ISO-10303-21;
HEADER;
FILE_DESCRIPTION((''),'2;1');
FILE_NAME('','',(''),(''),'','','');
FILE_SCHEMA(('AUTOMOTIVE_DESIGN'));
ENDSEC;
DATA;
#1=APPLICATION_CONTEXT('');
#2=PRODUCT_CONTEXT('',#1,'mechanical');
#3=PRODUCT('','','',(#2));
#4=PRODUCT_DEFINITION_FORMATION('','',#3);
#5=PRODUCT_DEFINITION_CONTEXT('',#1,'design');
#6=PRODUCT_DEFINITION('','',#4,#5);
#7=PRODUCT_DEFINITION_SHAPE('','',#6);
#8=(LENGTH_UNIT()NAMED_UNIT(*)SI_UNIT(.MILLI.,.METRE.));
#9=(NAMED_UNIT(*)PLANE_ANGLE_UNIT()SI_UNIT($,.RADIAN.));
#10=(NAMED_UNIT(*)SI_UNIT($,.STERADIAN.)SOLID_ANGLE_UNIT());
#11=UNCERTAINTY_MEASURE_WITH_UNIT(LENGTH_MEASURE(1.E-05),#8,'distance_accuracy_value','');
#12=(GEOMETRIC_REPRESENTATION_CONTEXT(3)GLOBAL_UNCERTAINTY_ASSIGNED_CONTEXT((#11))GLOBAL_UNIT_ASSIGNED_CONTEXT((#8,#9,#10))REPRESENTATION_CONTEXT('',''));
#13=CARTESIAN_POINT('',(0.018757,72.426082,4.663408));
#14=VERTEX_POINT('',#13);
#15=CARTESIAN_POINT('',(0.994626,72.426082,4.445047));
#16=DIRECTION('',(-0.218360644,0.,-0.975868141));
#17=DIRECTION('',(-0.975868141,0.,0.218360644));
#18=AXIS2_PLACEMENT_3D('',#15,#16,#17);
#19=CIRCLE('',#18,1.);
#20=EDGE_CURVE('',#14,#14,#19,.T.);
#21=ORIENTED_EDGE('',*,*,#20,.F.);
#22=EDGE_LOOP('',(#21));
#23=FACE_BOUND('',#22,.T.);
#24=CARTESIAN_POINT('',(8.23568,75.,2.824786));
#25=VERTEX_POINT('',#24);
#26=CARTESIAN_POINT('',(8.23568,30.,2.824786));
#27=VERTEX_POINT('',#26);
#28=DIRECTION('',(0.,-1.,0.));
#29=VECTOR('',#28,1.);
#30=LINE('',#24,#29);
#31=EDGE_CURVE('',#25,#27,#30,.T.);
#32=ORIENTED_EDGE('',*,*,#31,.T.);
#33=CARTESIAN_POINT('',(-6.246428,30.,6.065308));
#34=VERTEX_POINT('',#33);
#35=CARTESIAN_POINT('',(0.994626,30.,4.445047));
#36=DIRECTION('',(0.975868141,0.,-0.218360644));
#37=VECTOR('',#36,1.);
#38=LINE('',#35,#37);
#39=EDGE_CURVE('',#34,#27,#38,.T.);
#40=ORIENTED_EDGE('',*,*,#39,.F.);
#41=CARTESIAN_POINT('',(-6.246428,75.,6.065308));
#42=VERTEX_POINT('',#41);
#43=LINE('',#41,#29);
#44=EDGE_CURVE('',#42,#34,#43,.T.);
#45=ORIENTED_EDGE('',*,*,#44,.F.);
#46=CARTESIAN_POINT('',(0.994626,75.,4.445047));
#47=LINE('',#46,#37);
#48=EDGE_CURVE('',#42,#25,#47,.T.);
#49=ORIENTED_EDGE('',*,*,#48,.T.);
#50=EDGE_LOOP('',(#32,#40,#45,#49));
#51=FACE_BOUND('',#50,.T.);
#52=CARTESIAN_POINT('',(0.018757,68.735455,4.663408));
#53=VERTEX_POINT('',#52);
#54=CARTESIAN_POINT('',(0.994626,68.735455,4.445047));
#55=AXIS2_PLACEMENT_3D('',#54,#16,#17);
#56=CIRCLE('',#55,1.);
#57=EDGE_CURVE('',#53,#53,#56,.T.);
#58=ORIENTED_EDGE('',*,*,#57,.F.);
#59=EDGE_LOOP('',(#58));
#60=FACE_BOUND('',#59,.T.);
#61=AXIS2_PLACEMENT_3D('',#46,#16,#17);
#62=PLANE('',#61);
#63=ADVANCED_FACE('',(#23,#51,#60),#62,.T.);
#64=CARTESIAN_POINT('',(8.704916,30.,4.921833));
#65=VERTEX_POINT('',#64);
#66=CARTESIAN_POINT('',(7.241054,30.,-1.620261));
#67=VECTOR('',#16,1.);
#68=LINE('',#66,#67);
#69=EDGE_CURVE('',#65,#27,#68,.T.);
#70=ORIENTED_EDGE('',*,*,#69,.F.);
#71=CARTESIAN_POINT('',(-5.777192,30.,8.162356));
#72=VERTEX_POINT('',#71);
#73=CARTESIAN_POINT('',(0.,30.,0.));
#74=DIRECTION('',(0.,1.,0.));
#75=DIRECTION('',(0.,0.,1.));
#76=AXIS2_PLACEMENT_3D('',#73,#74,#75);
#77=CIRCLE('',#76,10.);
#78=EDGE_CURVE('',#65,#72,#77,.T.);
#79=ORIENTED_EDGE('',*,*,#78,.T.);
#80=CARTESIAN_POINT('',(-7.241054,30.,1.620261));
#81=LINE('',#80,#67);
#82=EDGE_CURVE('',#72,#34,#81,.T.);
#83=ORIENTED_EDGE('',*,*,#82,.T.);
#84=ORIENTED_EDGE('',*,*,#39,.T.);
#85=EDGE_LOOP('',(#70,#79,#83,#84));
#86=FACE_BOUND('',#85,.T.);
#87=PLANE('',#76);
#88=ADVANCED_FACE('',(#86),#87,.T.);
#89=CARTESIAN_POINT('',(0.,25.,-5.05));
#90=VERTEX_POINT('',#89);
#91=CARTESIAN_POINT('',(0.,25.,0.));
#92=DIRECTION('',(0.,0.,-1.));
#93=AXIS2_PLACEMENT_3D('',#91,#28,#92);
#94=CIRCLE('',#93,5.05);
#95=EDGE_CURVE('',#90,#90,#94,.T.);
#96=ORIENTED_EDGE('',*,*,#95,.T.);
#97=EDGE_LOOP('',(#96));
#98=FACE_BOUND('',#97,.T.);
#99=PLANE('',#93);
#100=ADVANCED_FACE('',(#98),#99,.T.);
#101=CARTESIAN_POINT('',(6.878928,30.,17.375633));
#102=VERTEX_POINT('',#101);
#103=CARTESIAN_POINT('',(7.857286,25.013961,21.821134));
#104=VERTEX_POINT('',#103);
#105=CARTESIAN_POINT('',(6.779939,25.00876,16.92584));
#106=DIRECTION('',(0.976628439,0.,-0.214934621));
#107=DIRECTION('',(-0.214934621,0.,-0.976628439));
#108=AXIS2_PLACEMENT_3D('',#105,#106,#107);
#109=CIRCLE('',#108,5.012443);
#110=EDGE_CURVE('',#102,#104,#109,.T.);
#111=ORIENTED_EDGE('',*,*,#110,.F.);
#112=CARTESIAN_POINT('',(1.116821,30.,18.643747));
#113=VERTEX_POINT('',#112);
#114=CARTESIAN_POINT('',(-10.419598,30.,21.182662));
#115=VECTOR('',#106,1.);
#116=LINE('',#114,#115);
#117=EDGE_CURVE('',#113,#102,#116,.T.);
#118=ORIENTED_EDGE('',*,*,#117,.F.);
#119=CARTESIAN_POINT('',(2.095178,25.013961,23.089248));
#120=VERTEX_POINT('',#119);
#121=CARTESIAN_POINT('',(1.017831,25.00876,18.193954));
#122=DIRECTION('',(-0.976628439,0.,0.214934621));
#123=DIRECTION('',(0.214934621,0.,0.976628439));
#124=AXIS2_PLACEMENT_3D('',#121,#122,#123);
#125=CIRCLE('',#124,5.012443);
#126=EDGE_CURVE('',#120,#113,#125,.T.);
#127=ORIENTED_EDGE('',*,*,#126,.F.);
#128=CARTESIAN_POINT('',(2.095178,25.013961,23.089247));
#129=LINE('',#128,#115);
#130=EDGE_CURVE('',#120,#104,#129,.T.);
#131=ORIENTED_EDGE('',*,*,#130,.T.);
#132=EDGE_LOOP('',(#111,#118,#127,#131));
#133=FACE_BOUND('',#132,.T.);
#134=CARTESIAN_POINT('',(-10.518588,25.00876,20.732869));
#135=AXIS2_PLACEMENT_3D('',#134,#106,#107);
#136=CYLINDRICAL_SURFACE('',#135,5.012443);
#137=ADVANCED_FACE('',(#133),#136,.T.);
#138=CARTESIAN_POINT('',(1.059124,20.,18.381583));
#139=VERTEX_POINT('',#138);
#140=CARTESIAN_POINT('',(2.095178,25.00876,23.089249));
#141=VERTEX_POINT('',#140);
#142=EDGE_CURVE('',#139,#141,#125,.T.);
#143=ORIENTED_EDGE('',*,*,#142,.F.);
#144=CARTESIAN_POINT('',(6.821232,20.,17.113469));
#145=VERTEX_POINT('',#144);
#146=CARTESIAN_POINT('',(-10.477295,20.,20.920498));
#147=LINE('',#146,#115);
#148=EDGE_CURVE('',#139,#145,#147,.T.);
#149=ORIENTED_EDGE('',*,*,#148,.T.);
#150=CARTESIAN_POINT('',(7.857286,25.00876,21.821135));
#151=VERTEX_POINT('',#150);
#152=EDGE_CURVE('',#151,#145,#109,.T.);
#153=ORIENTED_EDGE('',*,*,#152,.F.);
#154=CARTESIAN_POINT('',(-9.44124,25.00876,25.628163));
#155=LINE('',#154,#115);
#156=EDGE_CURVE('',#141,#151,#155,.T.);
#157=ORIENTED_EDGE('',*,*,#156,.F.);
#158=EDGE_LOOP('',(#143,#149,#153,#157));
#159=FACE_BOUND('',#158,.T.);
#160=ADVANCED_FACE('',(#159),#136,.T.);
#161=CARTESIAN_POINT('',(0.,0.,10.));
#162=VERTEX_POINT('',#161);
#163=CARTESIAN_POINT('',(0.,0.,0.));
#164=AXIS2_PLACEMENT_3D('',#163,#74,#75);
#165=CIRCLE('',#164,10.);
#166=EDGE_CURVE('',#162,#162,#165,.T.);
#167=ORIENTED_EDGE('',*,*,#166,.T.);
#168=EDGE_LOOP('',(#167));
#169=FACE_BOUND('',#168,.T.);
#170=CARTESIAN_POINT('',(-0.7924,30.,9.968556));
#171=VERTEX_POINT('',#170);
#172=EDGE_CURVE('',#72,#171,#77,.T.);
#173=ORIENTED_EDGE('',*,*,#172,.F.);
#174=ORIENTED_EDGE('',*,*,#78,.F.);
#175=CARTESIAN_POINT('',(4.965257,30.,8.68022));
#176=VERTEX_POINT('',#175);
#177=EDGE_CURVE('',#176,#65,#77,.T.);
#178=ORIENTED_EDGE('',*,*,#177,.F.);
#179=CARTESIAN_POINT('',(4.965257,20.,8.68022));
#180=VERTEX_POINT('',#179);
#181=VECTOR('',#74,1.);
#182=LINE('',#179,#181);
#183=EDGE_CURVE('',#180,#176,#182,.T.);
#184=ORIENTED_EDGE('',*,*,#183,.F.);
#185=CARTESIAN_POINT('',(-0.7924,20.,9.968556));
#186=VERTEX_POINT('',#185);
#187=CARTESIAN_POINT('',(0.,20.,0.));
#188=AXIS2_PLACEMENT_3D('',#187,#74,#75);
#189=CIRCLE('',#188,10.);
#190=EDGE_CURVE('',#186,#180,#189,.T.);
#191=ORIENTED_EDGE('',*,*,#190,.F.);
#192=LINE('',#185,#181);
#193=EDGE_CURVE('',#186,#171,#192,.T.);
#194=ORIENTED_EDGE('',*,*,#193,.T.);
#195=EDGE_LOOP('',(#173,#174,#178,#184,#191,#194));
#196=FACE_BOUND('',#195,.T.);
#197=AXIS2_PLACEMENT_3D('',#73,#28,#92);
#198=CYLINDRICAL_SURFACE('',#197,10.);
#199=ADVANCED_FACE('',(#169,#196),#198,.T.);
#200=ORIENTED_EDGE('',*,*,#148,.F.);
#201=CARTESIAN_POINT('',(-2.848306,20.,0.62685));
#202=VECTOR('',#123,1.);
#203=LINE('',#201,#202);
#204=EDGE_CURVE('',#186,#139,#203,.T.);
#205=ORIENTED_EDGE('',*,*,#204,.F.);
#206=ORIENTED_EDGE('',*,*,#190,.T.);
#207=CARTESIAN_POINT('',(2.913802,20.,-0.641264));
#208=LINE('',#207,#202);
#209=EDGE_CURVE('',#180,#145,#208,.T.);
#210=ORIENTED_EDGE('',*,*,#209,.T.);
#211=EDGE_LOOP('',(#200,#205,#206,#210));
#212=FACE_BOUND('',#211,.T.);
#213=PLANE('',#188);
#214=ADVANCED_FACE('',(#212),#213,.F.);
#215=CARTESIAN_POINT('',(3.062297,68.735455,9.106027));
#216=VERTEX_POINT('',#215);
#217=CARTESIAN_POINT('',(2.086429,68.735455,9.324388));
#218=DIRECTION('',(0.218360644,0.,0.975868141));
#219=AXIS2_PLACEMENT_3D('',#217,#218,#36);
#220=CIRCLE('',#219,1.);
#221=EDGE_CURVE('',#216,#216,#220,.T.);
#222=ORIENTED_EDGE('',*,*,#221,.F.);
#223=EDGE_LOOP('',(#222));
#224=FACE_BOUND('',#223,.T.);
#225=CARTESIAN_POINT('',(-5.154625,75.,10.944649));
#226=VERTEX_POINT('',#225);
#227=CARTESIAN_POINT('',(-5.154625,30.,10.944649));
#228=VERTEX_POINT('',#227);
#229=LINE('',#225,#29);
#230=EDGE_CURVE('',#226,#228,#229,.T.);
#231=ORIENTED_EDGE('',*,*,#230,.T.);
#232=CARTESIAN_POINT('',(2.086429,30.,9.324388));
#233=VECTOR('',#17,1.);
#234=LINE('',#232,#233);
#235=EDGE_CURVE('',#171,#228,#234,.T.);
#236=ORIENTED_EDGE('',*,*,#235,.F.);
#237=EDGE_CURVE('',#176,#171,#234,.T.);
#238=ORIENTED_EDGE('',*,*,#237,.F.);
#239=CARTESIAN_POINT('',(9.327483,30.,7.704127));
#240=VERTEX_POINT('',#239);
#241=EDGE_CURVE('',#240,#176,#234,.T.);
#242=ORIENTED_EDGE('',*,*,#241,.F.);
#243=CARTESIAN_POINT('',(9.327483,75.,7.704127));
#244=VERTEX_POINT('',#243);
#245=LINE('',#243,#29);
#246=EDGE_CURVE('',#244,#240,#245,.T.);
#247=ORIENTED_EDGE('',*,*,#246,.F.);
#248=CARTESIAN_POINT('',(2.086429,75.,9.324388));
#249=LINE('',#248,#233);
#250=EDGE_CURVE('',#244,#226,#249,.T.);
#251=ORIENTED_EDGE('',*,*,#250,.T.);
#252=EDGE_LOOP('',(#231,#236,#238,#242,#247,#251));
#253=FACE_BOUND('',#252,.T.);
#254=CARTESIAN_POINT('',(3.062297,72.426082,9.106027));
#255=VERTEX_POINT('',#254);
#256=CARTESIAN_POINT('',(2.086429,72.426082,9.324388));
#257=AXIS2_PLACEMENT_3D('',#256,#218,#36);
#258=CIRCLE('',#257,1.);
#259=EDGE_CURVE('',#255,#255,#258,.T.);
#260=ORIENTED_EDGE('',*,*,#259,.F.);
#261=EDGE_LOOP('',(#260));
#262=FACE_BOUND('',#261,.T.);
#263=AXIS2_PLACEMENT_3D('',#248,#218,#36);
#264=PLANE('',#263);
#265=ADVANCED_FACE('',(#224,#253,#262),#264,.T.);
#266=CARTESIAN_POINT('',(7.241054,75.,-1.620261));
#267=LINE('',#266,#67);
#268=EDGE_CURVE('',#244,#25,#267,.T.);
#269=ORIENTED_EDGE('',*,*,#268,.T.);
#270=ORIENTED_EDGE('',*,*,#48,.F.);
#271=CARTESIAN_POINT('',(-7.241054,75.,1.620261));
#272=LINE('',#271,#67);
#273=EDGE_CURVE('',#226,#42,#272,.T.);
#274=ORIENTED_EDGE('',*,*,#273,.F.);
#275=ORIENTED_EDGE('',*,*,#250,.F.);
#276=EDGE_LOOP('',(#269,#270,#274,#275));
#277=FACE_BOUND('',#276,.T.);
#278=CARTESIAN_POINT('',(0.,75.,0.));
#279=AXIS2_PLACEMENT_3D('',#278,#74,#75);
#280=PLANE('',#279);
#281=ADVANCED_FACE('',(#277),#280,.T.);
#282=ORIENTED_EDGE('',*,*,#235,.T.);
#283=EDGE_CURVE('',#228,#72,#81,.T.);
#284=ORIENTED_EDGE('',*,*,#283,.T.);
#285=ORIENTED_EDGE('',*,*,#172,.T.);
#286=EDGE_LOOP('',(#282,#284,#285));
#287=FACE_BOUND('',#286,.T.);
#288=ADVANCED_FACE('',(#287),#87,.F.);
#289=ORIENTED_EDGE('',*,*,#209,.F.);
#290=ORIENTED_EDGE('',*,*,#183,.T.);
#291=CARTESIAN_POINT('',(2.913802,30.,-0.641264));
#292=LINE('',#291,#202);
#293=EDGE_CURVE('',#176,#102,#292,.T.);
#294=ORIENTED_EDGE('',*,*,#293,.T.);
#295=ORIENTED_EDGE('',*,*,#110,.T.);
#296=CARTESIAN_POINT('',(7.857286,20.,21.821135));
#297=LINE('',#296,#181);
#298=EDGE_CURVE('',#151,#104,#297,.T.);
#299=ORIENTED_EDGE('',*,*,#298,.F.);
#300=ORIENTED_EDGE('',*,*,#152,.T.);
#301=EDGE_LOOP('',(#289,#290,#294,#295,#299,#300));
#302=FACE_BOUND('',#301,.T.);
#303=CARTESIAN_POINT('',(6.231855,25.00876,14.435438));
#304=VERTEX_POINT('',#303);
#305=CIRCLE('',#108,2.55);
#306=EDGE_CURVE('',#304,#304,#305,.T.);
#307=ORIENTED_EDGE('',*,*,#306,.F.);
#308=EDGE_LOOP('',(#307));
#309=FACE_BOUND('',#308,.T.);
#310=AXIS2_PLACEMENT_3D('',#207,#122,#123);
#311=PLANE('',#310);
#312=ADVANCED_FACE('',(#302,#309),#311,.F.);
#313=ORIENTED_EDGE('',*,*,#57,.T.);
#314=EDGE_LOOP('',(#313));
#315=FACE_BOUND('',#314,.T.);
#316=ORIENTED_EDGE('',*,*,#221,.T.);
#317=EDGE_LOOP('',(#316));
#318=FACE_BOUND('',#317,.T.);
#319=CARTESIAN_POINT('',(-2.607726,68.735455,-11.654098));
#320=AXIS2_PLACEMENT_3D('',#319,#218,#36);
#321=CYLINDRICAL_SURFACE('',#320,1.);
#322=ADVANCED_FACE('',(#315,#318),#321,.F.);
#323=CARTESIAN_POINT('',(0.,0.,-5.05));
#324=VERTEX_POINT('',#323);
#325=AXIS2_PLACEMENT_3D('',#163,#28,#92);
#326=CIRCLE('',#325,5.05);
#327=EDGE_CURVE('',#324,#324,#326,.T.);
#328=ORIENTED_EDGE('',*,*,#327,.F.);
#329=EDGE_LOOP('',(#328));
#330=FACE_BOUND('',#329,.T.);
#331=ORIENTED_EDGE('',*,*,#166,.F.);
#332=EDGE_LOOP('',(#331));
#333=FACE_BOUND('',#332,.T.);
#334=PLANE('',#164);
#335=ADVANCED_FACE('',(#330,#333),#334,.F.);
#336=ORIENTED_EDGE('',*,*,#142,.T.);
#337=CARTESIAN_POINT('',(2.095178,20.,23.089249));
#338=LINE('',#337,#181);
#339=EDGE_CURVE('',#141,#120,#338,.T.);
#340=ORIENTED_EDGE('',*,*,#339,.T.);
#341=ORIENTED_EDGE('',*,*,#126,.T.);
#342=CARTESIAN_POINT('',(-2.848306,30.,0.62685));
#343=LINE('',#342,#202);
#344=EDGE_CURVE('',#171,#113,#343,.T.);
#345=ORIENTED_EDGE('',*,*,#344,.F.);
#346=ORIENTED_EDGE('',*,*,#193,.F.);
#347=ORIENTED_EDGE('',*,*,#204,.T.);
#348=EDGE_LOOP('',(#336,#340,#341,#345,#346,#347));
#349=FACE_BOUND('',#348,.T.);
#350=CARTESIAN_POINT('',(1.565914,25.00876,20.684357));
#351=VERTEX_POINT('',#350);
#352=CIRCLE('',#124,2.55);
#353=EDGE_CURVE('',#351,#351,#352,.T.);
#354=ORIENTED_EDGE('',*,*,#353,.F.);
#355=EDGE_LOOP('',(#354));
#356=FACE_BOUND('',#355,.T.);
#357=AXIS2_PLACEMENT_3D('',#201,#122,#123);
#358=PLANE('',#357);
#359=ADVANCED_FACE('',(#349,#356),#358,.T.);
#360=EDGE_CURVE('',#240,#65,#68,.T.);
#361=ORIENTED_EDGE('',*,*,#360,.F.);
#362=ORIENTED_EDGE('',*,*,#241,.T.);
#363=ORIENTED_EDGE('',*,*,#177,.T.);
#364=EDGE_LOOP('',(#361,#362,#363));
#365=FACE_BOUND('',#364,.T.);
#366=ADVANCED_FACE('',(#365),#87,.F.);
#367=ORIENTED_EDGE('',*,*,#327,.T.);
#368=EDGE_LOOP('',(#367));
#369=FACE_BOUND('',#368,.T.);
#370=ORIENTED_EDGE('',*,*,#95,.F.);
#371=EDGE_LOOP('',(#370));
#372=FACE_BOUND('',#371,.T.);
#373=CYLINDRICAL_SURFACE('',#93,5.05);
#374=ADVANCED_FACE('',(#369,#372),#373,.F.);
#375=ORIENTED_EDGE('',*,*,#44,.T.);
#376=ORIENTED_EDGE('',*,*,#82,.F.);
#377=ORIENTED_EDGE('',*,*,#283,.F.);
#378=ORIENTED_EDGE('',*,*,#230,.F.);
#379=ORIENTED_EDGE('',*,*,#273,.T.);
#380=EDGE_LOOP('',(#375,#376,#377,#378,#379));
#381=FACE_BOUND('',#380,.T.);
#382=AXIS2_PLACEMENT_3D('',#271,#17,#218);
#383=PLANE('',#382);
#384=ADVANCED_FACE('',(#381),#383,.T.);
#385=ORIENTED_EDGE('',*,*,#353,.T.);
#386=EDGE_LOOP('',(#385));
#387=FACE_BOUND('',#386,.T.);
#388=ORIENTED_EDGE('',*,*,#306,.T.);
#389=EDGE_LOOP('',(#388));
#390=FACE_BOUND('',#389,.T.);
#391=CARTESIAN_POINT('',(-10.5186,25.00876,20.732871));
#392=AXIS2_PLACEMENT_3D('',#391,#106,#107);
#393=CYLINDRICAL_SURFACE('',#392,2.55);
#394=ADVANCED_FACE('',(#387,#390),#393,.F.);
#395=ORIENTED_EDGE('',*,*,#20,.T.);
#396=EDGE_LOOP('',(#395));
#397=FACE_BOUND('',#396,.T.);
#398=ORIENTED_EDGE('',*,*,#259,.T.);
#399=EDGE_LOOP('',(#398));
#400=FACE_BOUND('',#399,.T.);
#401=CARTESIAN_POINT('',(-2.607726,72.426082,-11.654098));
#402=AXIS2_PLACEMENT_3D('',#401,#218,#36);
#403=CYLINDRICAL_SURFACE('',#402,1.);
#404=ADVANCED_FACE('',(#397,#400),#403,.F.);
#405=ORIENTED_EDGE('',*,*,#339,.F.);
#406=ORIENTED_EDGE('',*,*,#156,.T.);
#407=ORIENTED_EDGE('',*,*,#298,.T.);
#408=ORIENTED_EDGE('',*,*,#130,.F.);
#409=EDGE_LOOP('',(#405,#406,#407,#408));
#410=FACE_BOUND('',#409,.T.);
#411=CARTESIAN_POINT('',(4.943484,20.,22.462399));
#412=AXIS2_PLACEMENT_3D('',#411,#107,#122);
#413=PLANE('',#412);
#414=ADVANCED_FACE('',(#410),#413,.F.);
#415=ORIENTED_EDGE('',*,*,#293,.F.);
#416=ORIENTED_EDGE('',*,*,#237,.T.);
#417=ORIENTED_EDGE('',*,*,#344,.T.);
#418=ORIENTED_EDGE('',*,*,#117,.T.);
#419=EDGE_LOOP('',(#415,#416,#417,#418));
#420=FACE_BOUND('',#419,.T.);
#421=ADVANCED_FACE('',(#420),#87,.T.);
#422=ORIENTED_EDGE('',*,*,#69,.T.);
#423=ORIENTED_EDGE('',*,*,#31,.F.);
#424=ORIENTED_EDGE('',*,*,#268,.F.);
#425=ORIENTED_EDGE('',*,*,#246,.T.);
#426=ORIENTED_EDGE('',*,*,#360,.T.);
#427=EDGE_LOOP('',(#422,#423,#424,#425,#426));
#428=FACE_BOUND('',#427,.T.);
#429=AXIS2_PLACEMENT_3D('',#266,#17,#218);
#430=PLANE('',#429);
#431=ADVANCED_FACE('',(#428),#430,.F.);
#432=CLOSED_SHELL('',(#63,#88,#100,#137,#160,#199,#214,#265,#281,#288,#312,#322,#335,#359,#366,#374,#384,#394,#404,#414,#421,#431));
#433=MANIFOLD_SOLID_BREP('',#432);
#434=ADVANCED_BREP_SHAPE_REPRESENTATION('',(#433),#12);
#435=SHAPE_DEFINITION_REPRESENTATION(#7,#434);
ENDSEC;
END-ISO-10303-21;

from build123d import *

# Parameters (mm, degrees)
SKETCH_2_R          = 10
EXTRUDE_1_DEPTH     = 30
EXTRUDE_START       = -10
EXTRUDE_2_DEPTH     = 10
CUT_EXTRUDE_4_DEPTH = 41.372064023
CUT_EXTRUDE_5_DEPTH = 41.372064023
CUT_EXTRUDE_6_DEPTH = 41.372064023
CUT_EXTRUDE_7_DEPTH = 41.372064023
SKETCH_10_R         = 5.05
CUT_EXTRUDE_8_DEPTH = 25
EXTRUDE_3_DEPTH     = 45
SKETCH_12_R         = 1
CUT_EXTRUDE_9_DEPTH = 79.386948681


with BuildPart() as part:
    # Эскиз2 → Бобышка-Вытянуть1 (new body)
    with BuildSketch(Plane(origin=(0, 0, 0), x_dir=(1, 0, 0), z_dir=(0, 1, 0))):
        Circle(SKETCH_2_R)
    extrude(amount=EXTRUDE_1_DEPTH)

    # Эскиз4 → Бобышка-Вытянуть2 (add)
    with BuildSketch(Plane(origin=(0, 30, 0), x_dir=(1, 0, 0), z_dir=(0, 1, 0)).offset(EXTRUDE_START)):
        with BuildLine():
            Line((7.857286278, -21.821134908), (4.965257474, -8.680219941))
            ThreePointArc((4.965257474, -8.680219941), (2.18360644, -9.758681413), (-0.792400015, -9.968555674))
            Line((-0.792400015, -9.968555674), (2.095178486, -23.089249172))
            Line((2.095178486, -23.089249172), (7.857286278, -21.821134908))
        make_face()
    extrude(amount=EXTRUDE_2_DEPTH)

    # Эскиз6 → Вырез-Вытянуть4 (cut, through all)
    with BuildSketch(Plane(origin=(2.913802079, 0, -0.641264293), x_dir=(-0.2149346210056599, 0, -0.9766284394247146), z_dir=(0.9766284394247146, 0, -0.2149346210056599))):
        with BuildLine():
            Line((-22.999943781, 25.008760147), (-22.999943781, 20))
            Line((-22.999943781, 20), (-18.179619595, 20))
            ThreePointArc((-18.179619595, 20), (-21.599118817, 21.533015498), (-22.999943781, 25.008760147))
        make_face()
    extrude(amount=-CUT_EXTRUDE_4_DEPTH, mode=Mode.SUBTRACT)

    # Эскиз6<3> → Вырез-Вытянуть5 (cut, through all)
    with BuildSketch(Plane(origin=(2.913802079, 0, -0.641264293), x_dir=(-0.2149346210056599, 0, -0.9766284394247146), z_dir=(0.9766284394247146, 0, -0.2149346210056599))):
        with BuildLine():
            Line((-22.999943781, 30), (-22.999943781, 25.008760147))
            ThreePointArc((-22.999943781, 25.008760147), (-21.691086809, 28.386338596), (-18.448057419, 30))
            Line((-18.448057419, 30), (-22.999943781, 30))
        make_face()
    extrude(amount=-CUT_EXTRUDE_5_DEPTH, mode=Mode.SUBTRACT)

    # Эскиз6<4> → Вырез-Вытянуть6 (cut, through all)
    with BuildSketch(Plane(origin=(2.913802079, 0, -0.641264293), x_dir=(-0.2149346210056599, 0, -0.9766284394247146), z_dir=(0.9766284394247146, 0, -0.2149346210056599))):
        with BuildLine():
            Line((-15.437501839, 25.006114345), (-20.537499094, 25.01140595))
            ThreePointArc((-20.537499094, 25.01140595), (-17.990146269, 22.45876152), (-15.437501839, 25.006114345))
        make_face()
    extrude(amount=-CUT_EXTRUDE_6_DEPTH, mode=Mode.SUBTRACT)

    # Эскиз6<5> → Вырез-Вытянуть7 (cut, through all)
    with BuildSketch(Plane(origin=(2.913802079, 0, -0.641264293), x_dir=(-0.2149346210056599, 0, -0.9766284394247146), z_dir=(0.9766284394247146, 0, -0.2149346210056599))):
        with BuildLine():
            ThreePointArc((-15.437500467, 25.008760147), (-17.986177565, 27.558759804), (-20.537499094, 25.01140595))
            Line((-20.537499094, 25.01140595), (-15.437501839, 25.006114345))
            ThreePointArc((-15.437501839, 25.006114345), (-15.43750081, 25.007437246), (-15.437500467, 25.008760147))
        make_face()
    extrude(amount=-CUT_EXTRUDE_7_DEPTH, mode=Mode.SUBTRACT)

    # Эскиз10 → Вырез-Вытянуть8 (cut)
    with BuildSketch(Plane.XZ):
        Circle(SKETCH_10_R)
    extrude(amount=-CUT_EXTRUDE_8_DEPTH, mode=Mode.SUBTRACT)

    # Эскиз11 → Бобышка-Вытянуть3 (add)
    with BuildSketch(Plane(origin=(0, 30, 0), x_dir=(1, 0, 0), z_dir=(0, 1, 0))):
        Polygon((-6.246428482, -6.065308226), (-5.154625262, -10.944648932), (9.327482721, -7.704126682), (8.235679501, -2.824785976), align=None)
    extrude(amount=EXTRUDE_3_DEPTH)

    # Эскиз12 → Вырез-Вытянуть9 (cut, through all)
    with BuildSketch(Plane(origin=(2.08642873, 0, 9.324387807), x_dir=(0.975868141278159, 0, -0.21836064397759777), z_dir=(0.21836064397759777, 0, 0.975868141278159))):
        with Locations((0, 72.426081563)):
            Circle(SKETCH_12_R)
        with Locations((0, 68.735454777)):
            Circle(SKETCH_12_R)
    extrude(amount=-CUT_EXTRUDE_9_DEPTH, mode=Mode.SUBTRACT)


solid = part.part
